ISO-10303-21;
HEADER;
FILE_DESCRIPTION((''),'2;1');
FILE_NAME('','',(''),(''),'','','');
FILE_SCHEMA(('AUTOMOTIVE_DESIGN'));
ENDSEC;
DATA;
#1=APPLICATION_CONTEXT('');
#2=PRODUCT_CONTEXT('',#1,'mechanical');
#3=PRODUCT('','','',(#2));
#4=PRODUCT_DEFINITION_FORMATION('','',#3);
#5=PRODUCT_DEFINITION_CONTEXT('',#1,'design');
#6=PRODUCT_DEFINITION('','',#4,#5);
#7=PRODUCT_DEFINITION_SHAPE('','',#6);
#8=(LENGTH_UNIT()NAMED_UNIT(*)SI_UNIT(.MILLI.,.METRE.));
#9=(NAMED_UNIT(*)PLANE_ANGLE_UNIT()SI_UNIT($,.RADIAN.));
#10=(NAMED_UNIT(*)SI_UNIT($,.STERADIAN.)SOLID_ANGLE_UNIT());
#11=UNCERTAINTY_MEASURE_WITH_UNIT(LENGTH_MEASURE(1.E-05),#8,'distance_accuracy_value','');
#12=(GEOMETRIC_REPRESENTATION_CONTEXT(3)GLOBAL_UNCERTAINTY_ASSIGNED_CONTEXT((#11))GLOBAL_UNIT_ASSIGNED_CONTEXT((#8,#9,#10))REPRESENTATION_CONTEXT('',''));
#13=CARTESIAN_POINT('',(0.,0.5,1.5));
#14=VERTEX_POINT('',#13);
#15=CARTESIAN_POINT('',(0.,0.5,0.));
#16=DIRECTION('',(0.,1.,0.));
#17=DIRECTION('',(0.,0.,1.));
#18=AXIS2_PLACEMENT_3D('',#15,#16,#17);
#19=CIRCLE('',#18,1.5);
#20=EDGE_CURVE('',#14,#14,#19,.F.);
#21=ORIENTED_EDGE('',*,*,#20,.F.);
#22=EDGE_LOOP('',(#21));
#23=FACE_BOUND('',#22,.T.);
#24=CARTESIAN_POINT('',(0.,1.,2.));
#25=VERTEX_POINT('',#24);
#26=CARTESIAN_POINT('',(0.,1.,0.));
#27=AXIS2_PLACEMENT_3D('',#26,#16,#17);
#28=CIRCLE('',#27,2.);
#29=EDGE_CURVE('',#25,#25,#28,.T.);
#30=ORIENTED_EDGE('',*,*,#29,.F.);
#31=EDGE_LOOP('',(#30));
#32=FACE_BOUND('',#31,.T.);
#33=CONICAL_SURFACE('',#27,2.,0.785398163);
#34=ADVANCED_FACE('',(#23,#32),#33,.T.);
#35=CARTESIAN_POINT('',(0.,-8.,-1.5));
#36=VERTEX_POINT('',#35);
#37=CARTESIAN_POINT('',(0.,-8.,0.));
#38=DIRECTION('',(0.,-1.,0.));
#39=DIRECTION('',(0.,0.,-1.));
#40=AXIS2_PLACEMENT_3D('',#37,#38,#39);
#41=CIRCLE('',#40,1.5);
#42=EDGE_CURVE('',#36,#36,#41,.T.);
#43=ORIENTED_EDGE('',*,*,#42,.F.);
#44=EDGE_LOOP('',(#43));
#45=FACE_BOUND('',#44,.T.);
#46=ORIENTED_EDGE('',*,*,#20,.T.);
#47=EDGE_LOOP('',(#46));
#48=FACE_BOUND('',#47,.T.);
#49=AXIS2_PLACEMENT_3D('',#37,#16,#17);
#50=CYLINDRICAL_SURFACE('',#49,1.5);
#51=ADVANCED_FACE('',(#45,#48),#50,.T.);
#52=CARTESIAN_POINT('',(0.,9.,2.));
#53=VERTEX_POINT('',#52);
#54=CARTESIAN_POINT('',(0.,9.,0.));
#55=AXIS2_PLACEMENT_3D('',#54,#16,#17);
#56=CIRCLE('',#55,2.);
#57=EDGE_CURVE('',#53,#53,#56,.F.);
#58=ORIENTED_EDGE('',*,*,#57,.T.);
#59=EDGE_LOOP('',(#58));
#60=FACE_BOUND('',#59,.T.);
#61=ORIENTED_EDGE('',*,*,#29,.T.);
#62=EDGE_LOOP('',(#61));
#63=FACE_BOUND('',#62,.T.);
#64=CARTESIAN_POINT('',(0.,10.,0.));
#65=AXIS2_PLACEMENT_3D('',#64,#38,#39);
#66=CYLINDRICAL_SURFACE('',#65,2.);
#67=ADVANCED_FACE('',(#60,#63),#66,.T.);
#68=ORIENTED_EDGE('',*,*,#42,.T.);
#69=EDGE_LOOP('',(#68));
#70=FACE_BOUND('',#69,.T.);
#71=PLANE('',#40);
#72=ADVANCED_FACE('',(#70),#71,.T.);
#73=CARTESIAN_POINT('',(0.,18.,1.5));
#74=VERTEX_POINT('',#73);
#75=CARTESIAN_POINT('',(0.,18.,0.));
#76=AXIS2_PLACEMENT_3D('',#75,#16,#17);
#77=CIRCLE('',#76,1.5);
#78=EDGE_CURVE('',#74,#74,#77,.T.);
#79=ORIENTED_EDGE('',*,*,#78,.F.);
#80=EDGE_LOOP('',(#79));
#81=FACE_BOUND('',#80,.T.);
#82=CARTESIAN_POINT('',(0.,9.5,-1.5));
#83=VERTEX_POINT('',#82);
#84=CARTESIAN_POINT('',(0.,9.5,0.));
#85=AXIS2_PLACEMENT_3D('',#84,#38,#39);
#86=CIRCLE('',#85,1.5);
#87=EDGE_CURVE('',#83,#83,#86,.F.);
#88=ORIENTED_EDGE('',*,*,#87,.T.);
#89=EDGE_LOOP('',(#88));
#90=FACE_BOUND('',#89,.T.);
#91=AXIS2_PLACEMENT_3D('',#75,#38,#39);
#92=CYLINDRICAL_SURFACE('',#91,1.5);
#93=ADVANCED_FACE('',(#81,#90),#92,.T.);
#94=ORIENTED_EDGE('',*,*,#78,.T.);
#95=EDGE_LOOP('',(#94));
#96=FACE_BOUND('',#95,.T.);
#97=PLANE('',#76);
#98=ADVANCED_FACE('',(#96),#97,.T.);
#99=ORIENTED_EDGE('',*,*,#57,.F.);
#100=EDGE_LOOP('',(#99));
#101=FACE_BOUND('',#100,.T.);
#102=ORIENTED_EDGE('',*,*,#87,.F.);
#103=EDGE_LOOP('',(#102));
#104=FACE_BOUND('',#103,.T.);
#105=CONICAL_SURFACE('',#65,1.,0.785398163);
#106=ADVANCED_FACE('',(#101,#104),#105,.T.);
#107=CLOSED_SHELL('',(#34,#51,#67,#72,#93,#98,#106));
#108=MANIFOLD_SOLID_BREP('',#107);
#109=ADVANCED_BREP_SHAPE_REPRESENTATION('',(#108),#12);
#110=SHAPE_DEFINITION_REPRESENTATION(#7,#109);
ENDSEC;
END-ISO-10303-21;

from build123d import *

# Parameters (mm, degrees)
SKETCH_1_R      = 2
EXTRUDE_1_DEPTH = 10
SKETCH_2_R      = 1.5
EXTRUDE_2_DEPTH = 8
EXTRUDE_START   = 8
SKETCH_3_R      = 1.5
EXTRUDE_3_DEPTH = 8
CHAMFER_1_SIZE  = 1


with BuildPart() as part:
    # 草图1 → 凸台-拉伸1 (new body)
    with BuildSketch(Plane(origin=(0, 0, 0), x_dir=(1, 0, 0), z_dir=(0, 1, 0))):
        with Locations(Location((0, 0, 0), (0, 0, 270))):
            Circle(SKETCH_1_R)
    extrude(amount=EXTRUDE_1_DEPTH)

    # 草图2 → 凸台-拉伸2 (add)
    with BuildSketch(Plane.XZ):
        with Locations(Location((0, 0, 0), (0, 0, 270))):
            Circle(SKETCH_2_R)
    extrude(amount=EXTRUDE_2_DEPTH)

    # 草图3 → 凸台-拉伸3 (add)
    with BuildSketch(Plane(origin=(0, 10, 0), x_dir=(1, 0, 0), z_dir=(0, 1, 0)).offset(EXTRUDE_START)):
        with Locations(Location((0, 0, 0), (0, 0, 90))):
            Circle(SKETCH_3_R)
    extrude(amount=-EXTRUDE_3_DEPTH)

    # 倒角1
    # the kernel refuses this chamfer: 1 mm, written as the material it takes off along each edge
    with BuildSketch(Plane(origin=(0, 0, 0), x_dir=(0, 0, 1), z_dir=(-1, 0, 0))) as chamfer_1_piece_1_section:
        Polygon((2, CHAMFER_1_SIZE), (2 - CHAMFER_1_SIZE, 0), (2, 0), align=None)
    chamfer_1_piece_1 = revolve(axis=Axis((0, 0, 0), (0, 1, 0)), mode=Mode.PRIVATE)
    chamfer_1_piece_1 = chamfer_1_piece_1 - Plane(origin=(0, 0.752378324, 0), x_dir=(0, 0, -1), z_dir=(0, 1, 0)) * Cylinder(1.5, 8, mode=Mode.PRIVATE)
    add(chamfer_1_piece_1, mode=Mode.SUBTRACT)
    with BuildSketch(Plane(origin=(0, 10, 0), x_dir=(0, 0, 1), z_dir=(-1, 0, 0))) as chamfer_1_piece_2_section:
        Polygon((2, -CHAMFER_1_SIZE), (2 - CHAMFER_1_SIZE, 0), (2, 0), align=None)
    chamfer_1_piece_2 = revolve(axis=Axis((0, 10, 0), (0, 1, 0)), mode=Mode.PRIVATE)
    chamfer_1_piece_2 = chamfer_1_piece_2 - Plane(origin=(0, 9.247621676, 0), x_dir=(0, 0, -1), z_dir=(0, 1, 0)) * Cylinder(1.5, 8, mode=Mode.PRIVATE)
    add(chamfer_1_piece_2, mode=Mode.SUBTRACT)


solid = part.part
